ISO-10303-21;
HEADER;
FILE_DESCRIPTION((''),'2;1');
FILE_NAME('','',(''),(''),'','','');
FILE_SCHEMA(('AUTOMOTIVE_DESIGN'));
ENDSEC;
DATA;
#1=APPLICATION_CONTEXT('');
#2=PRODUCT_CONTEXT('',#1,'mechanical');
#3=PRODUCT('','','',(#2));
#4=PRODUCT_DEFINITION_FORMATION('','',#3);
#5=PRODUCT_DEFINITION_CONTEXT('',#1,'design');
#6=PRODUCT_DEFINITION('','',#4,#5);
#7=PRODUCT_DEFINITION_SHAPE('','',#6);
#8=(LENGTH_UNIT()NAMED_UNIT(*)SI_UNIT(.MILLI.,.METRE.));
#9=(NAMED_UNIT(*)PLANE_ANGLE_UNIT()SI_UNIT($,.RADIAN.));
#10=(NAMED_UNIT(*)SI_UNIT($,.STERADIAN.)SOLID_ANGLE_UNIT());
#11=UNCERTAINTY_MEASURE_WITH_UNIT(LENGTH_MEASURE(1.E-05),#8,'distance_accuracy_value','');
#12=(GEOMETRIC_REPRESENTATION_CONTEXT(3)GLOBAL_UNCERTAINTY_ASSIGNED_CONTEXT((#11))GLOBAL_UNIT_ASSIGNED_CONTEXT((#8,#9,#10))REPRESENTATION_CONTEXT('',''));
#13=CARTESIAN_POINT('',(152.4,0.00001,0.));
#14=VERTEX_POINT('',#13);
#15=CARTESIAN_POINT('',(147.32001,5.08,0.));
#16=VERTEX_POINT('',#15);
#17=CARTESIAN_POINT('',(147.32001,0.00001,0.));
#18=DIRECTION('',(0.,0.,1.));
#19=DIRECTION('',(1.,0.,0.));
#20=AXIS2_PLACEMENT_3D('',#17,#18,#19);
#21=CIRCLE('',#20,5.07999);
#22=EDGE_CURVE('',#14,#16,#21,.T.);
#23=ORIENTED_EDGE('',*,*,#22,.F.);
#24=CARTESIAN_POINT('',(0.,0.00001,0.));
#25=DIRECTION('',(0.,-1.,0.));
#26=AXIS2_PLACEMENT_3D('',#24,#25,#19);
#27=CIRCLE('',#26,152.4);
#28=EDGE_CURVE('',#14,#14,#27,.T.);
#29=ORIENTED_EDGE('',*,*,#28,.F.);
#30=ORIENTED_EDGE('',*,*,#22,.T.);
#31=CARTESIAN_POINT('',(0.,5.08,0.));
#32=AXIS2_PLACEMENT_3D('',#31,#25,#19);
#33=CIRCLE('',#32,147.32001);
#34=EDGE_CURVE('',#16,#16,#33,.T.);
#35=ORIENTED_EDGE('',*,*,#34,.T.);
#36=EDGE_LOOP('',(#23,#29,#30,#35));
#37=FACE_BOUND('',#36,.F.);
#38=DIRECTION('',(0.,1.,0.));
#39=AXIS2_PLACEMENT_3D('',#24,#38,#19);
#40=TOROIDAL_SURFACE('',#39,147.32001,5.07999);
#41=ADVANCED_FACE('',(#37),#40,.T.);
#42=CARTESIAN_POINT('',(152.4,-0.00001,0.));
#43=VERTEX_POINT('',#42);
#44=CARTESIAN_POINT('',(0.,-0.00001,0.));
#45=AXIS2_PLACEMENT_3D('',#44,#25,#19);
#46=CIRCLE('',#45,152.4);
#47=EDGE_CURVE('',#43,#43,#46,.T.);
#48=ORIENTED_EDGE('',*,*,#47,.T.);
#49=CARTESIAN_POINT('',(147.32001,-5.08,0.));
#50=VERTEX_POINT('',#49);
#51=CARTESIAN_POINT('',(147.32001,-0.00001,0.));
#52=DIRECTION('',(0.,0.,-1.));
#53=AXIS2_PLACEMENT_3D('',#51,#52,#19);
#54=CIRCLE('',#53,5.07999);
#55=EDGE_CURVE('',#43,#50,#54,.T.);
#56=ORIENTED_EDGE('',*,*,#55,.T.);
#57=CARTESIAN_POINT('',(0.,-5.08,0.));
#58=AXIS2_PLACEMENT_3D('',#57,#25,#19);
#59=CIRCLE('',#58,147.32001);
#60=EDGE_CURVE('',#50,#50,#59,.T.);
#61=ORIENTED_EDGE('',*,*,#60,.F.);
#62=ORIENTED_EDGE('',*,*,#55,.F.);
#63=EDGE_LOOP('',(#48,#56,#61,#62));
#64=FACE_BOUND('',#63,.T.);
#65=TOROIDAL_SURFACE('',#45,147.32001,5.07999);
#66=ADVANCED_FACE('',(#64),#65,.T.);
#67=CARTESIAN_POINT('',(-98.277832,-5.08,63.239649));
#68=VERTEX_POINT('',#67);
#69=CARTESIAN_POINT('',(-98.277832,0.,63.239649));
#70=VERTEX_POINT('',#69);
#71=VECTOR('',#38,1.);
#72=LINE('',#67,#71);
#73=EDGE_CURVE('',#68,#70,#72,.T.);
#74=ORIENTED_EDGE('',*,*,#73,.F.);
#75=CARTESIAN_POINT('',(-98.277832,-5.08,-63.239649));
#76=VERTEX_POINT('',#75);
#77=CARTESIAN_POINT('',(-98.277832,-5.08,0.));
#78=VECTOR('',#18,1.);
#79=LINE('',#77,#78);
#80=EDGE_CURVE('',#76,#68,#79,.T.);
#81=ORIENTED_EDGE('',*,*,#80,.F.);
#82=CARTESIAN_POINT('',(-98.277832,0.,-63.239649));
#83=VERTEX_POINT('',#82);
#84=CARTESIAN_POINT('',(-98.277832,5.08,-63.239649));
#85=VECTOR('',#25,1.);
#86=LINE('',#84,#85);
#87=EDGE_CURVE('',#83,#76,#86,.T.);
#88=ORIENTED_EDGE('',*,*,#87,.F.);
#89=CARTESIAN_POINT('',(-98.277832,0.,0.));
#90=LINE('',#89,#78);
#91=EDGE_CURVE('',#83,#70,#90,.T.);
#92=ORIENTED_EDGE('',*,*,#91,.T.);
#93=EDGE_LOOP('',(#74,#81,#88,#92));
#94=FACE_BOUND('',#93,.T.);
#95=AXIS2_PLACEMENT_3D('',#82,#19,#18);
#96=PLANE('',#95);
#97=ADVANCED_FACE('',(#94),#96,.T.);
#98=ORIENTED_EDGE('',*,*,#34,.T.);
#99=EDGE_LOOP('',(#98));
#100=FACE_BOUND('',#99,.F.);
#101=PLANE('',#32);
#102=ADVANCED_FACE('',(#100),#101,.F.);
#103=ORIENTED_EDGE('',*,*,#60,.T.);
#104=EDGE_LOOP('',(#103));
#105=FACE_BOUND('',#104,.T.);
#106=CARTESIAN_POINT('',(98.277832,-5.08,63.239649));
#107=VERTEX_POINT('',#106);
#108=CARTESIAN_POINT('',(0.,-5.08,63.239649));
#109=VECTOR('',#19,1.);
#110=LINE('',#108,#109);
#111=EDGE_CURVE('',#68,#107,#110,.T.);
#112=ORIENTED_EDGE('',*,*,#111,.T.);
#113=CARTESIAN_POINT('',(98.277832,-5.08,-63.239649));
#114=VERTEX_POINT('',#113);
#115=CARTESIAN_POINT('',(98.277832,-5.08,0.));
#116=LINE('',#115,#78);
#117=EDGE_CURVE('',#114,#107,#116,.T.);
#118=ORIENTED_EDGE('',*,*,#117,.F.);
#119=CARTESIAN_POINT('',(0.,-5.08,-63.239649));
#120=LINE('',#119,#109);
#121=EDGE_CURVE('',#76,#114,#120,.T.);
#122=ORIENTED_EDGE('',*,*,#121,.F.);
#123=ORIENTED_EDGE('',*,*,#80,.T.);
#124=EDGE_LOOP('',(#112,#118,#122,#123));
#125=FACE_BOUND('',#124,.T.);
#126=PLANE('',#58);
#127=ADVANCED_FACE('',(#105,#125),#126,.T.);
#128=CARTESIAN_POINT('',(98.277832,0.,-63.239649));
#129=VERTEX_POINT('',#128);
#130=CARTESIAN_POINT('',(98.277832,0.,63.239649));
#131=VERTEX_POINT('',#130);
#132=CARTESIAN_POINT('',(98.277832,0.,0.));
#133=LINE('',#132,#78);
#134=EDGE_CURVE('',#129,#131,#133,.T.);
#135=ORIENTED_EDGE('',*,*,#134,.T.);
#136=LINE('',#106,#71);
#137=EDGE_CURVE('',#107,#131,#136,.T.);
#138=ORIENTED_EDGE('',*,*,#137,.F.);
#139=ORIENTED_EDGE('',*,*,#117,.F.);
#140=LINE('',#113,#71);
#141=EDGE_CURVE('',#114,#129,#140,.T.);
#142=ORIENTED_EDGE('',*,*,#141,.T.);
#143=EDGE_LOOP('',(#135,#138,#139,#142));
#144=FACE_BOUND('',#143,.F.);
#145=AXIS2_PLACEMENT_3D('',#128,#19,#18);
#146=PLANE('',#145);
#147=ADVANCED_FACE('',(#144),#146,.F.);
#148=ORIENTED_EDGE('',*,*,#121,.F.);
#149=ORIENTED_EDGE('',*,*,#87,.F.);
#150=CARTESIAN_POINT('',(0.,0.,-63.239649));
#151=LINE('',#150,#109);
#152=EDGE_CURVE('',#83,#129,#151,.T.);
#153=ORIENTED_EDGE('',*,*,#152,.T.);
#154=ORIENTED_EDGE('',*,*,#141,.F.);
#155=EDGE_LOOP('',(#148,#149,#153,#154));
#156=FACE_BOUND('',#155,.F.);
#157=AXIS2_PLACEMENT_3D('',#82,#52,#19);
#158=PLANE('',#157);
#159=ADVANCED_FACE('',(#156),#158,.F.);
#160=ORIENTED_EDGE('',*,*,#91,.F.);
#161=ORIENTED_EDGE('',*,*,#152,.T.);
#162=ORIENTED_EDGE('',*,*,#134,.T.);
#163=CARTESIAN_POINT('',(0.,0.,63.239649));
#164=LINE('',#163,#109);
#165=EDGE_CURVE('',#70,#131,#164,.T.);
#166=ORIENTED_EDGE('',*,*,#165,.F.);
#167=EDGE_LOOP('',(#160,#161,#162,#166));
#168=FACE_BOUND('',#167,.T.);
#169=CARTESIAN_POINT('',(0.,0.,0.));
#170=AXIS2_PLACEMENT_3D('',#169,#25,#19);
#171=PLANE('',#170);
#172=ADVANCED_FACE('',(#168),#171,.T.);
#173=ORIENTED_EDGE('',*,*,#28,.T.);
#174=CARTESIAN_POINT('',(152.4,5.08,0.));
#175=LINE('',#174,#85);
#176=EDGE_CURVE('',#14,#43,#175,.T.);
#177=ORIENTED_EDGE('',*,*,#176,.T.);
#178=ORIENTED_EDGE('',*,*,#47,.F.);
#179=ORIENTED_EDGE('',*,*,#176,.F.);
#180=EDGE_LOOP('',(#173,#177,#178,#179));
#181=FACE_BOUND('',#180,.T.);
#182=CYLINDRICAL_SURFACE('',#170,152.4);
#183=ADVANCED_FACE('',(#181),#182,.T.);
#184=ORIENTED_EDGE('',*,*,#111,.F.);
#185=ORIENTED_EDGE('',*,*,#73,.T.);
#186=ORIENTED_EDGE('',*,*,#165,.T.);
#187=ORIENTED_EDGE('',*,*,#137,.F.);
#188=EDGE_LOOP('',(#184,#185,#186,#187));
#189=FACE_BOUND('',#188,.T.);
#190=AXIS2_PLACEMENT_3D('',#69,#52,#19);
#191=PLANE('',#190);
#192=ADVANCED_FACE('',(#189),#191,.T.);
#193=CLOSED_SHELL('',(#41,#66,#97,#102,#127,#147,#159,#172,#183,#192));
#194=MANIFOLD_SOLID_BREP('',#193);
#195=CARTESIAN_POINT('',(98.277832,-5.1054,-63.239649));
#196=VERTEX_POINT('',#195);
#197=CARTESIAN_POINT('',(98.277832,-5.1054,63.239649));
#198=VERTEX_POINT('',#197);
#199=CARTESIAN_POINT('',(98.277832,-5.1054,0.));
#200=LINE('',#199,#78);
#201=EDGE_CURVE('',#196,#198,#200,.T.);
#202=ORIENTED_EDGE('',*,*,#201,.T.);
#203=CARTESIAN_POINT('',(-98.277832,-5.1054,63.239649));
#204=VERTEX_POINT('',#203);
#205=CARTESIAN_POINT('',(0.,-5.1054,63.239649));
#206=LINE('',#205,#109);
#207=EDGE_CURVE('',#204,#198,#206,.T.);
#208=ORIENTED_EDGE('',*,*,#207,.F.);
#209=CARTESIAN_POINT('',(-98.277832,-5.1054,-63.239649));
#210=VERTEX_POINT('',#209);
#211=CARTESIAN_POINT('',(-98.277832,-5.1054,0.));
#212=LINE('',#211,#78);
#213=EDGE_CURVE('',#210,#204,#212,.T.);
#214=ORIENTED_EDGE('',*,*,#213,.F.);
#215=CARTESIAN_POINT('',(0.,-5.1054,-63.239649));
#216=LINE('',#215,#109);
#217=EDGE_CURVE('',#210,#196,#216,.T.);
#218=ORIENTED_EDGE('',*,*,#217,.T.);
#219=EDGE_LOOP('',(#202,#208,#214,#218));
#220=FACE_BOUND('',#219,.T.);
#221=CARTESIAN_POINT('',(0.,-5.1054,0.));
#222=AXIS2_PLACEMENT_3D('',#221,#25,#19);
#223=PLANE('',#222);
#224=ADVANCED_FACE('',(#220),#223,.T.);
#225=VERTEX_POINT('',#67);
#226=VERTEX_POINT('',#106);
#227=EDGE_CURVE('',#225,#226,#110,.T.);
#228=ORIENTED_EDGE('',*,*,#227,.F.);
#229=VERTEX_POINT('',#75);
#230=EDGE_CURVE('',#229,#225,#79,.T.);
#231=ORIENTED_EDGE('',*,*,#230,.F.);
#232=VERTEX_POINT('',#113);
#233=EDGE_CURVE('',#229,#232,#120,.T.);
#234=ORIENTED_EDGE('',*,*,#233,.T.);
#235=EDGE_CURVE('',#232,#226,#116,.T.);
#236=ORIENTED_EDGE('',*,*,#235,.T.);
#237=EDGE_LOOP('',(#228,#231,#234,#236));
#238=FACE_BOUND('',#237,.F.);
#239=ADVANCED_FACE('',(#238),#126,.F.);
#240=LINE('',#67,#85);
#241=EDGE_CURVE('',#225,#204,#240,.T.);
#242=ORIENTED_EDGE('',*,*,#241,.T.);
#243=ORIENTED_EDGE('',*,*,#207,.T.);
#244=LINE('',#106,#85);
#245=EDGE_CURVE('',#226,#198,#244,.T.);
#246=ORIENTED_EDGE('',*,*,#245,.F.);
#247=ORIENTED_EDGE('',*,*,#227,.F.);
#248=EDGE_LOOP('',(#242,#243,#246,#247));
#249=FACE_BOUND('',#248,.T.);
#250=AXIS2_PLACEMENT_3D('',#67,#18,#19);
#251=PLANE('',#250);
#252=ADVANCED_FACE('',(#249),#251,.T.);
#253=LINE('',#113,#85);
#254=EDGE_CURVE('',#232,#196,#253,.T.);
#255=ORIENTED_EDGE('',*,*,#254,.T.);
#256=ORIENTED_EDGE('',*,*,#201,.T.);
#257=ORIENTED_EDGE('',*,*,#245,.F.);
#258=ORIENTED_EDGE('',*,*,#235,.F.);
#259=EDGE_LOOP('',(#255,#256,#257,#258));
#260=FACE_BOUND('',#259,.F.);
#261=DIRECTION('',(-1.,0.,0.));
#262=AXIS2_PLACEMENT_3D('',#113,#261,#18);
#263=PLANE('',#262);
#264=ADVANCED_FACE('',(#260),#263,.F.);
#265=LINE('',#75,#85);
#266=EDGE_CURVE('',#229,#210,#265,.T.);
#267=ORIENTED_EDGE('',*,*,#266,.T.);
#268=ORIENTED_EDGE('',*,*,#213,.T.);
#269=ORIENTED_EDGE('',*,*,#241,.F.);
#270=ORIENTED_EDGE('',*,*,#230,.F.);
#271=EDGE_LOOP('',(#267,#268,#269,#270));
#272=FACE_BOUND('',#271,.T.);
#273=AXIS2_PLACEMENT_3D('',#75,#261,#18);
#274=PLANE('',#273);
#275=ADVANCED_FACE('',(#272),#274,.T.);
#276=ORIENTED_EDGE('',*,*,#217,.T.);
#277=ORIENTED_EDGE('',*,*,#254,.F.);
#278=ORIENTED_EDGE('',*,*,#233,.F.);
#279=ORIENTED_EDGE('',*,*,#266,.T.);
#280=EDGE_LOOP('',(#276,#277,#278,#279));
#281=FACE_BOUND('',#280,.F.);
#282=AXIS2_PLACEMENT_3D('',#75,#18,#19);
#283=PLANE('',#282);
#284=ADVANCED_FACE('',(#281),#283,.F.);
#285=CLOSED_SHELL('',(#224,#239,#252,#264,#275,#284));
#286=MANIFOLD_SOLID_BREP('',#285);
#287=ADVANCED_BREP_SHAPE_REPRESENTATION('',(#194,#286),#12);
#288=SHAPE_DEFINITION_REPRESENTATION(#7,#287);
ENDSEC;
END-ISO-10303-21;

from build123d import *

# Parameters (mm, degrees)
F0_R     = 152.4
F0_W     = 196.5556636505
F0_H     = 126.4792977641
F1_DEPTH = 5.08
F3_R     = 5.07999
F4_DEPTH = 5.08
F5_W     = 196.5556636505
F5_H     = 126.4792977641
F6_DEPTH = 0.0254


# Not quite as in the source:
# - a fillet or chamfer is up to 0.001 mm smaller than in the source, because OpenCascade refuses the exact size
# - the program builds the solid bodies; features that only make, move or delete a surface that nothing else refers to are left out


with BuildPart() as f1:
    # F0 (on Front) → F1 (new body, symmetric)
    with BuildSketch(Plane.XZ):
        Circle(F0_R)
        Rectangle(F0_W, F0_H, mode=Mode.SUBTRACT)
    extrude(amount=F1_DEPTH, both=True)

    # F3 (radius 5.08 in the source; OpenCascade refuses exactly that, so slightly less here)
    f3_edges = [f1.edges().sort_by_distance(p)[0] for p in [
        (-152.4, 5.08, 0),
        (-152.4, -5.08, 0),
    ]]
    fillet(f3_edges, radius=F3_R)

    # F0 (on Front) → F4 (join)
    with BuildSketch(Plane.XZ):
        Rectangle(F0_W, F0_H)
    extrude(amount=-F4_DEPTH)


with BuildPart() as f6:
    # F5 (on face) → F6 (new body)
    with BuildSketch(Plane.XZ.offset(5.08)):
        Rectangle(F5_W, F5_H)
    extrude(amount=F6_DEPTH)


solid = Compound([f1.part, f6.part])
